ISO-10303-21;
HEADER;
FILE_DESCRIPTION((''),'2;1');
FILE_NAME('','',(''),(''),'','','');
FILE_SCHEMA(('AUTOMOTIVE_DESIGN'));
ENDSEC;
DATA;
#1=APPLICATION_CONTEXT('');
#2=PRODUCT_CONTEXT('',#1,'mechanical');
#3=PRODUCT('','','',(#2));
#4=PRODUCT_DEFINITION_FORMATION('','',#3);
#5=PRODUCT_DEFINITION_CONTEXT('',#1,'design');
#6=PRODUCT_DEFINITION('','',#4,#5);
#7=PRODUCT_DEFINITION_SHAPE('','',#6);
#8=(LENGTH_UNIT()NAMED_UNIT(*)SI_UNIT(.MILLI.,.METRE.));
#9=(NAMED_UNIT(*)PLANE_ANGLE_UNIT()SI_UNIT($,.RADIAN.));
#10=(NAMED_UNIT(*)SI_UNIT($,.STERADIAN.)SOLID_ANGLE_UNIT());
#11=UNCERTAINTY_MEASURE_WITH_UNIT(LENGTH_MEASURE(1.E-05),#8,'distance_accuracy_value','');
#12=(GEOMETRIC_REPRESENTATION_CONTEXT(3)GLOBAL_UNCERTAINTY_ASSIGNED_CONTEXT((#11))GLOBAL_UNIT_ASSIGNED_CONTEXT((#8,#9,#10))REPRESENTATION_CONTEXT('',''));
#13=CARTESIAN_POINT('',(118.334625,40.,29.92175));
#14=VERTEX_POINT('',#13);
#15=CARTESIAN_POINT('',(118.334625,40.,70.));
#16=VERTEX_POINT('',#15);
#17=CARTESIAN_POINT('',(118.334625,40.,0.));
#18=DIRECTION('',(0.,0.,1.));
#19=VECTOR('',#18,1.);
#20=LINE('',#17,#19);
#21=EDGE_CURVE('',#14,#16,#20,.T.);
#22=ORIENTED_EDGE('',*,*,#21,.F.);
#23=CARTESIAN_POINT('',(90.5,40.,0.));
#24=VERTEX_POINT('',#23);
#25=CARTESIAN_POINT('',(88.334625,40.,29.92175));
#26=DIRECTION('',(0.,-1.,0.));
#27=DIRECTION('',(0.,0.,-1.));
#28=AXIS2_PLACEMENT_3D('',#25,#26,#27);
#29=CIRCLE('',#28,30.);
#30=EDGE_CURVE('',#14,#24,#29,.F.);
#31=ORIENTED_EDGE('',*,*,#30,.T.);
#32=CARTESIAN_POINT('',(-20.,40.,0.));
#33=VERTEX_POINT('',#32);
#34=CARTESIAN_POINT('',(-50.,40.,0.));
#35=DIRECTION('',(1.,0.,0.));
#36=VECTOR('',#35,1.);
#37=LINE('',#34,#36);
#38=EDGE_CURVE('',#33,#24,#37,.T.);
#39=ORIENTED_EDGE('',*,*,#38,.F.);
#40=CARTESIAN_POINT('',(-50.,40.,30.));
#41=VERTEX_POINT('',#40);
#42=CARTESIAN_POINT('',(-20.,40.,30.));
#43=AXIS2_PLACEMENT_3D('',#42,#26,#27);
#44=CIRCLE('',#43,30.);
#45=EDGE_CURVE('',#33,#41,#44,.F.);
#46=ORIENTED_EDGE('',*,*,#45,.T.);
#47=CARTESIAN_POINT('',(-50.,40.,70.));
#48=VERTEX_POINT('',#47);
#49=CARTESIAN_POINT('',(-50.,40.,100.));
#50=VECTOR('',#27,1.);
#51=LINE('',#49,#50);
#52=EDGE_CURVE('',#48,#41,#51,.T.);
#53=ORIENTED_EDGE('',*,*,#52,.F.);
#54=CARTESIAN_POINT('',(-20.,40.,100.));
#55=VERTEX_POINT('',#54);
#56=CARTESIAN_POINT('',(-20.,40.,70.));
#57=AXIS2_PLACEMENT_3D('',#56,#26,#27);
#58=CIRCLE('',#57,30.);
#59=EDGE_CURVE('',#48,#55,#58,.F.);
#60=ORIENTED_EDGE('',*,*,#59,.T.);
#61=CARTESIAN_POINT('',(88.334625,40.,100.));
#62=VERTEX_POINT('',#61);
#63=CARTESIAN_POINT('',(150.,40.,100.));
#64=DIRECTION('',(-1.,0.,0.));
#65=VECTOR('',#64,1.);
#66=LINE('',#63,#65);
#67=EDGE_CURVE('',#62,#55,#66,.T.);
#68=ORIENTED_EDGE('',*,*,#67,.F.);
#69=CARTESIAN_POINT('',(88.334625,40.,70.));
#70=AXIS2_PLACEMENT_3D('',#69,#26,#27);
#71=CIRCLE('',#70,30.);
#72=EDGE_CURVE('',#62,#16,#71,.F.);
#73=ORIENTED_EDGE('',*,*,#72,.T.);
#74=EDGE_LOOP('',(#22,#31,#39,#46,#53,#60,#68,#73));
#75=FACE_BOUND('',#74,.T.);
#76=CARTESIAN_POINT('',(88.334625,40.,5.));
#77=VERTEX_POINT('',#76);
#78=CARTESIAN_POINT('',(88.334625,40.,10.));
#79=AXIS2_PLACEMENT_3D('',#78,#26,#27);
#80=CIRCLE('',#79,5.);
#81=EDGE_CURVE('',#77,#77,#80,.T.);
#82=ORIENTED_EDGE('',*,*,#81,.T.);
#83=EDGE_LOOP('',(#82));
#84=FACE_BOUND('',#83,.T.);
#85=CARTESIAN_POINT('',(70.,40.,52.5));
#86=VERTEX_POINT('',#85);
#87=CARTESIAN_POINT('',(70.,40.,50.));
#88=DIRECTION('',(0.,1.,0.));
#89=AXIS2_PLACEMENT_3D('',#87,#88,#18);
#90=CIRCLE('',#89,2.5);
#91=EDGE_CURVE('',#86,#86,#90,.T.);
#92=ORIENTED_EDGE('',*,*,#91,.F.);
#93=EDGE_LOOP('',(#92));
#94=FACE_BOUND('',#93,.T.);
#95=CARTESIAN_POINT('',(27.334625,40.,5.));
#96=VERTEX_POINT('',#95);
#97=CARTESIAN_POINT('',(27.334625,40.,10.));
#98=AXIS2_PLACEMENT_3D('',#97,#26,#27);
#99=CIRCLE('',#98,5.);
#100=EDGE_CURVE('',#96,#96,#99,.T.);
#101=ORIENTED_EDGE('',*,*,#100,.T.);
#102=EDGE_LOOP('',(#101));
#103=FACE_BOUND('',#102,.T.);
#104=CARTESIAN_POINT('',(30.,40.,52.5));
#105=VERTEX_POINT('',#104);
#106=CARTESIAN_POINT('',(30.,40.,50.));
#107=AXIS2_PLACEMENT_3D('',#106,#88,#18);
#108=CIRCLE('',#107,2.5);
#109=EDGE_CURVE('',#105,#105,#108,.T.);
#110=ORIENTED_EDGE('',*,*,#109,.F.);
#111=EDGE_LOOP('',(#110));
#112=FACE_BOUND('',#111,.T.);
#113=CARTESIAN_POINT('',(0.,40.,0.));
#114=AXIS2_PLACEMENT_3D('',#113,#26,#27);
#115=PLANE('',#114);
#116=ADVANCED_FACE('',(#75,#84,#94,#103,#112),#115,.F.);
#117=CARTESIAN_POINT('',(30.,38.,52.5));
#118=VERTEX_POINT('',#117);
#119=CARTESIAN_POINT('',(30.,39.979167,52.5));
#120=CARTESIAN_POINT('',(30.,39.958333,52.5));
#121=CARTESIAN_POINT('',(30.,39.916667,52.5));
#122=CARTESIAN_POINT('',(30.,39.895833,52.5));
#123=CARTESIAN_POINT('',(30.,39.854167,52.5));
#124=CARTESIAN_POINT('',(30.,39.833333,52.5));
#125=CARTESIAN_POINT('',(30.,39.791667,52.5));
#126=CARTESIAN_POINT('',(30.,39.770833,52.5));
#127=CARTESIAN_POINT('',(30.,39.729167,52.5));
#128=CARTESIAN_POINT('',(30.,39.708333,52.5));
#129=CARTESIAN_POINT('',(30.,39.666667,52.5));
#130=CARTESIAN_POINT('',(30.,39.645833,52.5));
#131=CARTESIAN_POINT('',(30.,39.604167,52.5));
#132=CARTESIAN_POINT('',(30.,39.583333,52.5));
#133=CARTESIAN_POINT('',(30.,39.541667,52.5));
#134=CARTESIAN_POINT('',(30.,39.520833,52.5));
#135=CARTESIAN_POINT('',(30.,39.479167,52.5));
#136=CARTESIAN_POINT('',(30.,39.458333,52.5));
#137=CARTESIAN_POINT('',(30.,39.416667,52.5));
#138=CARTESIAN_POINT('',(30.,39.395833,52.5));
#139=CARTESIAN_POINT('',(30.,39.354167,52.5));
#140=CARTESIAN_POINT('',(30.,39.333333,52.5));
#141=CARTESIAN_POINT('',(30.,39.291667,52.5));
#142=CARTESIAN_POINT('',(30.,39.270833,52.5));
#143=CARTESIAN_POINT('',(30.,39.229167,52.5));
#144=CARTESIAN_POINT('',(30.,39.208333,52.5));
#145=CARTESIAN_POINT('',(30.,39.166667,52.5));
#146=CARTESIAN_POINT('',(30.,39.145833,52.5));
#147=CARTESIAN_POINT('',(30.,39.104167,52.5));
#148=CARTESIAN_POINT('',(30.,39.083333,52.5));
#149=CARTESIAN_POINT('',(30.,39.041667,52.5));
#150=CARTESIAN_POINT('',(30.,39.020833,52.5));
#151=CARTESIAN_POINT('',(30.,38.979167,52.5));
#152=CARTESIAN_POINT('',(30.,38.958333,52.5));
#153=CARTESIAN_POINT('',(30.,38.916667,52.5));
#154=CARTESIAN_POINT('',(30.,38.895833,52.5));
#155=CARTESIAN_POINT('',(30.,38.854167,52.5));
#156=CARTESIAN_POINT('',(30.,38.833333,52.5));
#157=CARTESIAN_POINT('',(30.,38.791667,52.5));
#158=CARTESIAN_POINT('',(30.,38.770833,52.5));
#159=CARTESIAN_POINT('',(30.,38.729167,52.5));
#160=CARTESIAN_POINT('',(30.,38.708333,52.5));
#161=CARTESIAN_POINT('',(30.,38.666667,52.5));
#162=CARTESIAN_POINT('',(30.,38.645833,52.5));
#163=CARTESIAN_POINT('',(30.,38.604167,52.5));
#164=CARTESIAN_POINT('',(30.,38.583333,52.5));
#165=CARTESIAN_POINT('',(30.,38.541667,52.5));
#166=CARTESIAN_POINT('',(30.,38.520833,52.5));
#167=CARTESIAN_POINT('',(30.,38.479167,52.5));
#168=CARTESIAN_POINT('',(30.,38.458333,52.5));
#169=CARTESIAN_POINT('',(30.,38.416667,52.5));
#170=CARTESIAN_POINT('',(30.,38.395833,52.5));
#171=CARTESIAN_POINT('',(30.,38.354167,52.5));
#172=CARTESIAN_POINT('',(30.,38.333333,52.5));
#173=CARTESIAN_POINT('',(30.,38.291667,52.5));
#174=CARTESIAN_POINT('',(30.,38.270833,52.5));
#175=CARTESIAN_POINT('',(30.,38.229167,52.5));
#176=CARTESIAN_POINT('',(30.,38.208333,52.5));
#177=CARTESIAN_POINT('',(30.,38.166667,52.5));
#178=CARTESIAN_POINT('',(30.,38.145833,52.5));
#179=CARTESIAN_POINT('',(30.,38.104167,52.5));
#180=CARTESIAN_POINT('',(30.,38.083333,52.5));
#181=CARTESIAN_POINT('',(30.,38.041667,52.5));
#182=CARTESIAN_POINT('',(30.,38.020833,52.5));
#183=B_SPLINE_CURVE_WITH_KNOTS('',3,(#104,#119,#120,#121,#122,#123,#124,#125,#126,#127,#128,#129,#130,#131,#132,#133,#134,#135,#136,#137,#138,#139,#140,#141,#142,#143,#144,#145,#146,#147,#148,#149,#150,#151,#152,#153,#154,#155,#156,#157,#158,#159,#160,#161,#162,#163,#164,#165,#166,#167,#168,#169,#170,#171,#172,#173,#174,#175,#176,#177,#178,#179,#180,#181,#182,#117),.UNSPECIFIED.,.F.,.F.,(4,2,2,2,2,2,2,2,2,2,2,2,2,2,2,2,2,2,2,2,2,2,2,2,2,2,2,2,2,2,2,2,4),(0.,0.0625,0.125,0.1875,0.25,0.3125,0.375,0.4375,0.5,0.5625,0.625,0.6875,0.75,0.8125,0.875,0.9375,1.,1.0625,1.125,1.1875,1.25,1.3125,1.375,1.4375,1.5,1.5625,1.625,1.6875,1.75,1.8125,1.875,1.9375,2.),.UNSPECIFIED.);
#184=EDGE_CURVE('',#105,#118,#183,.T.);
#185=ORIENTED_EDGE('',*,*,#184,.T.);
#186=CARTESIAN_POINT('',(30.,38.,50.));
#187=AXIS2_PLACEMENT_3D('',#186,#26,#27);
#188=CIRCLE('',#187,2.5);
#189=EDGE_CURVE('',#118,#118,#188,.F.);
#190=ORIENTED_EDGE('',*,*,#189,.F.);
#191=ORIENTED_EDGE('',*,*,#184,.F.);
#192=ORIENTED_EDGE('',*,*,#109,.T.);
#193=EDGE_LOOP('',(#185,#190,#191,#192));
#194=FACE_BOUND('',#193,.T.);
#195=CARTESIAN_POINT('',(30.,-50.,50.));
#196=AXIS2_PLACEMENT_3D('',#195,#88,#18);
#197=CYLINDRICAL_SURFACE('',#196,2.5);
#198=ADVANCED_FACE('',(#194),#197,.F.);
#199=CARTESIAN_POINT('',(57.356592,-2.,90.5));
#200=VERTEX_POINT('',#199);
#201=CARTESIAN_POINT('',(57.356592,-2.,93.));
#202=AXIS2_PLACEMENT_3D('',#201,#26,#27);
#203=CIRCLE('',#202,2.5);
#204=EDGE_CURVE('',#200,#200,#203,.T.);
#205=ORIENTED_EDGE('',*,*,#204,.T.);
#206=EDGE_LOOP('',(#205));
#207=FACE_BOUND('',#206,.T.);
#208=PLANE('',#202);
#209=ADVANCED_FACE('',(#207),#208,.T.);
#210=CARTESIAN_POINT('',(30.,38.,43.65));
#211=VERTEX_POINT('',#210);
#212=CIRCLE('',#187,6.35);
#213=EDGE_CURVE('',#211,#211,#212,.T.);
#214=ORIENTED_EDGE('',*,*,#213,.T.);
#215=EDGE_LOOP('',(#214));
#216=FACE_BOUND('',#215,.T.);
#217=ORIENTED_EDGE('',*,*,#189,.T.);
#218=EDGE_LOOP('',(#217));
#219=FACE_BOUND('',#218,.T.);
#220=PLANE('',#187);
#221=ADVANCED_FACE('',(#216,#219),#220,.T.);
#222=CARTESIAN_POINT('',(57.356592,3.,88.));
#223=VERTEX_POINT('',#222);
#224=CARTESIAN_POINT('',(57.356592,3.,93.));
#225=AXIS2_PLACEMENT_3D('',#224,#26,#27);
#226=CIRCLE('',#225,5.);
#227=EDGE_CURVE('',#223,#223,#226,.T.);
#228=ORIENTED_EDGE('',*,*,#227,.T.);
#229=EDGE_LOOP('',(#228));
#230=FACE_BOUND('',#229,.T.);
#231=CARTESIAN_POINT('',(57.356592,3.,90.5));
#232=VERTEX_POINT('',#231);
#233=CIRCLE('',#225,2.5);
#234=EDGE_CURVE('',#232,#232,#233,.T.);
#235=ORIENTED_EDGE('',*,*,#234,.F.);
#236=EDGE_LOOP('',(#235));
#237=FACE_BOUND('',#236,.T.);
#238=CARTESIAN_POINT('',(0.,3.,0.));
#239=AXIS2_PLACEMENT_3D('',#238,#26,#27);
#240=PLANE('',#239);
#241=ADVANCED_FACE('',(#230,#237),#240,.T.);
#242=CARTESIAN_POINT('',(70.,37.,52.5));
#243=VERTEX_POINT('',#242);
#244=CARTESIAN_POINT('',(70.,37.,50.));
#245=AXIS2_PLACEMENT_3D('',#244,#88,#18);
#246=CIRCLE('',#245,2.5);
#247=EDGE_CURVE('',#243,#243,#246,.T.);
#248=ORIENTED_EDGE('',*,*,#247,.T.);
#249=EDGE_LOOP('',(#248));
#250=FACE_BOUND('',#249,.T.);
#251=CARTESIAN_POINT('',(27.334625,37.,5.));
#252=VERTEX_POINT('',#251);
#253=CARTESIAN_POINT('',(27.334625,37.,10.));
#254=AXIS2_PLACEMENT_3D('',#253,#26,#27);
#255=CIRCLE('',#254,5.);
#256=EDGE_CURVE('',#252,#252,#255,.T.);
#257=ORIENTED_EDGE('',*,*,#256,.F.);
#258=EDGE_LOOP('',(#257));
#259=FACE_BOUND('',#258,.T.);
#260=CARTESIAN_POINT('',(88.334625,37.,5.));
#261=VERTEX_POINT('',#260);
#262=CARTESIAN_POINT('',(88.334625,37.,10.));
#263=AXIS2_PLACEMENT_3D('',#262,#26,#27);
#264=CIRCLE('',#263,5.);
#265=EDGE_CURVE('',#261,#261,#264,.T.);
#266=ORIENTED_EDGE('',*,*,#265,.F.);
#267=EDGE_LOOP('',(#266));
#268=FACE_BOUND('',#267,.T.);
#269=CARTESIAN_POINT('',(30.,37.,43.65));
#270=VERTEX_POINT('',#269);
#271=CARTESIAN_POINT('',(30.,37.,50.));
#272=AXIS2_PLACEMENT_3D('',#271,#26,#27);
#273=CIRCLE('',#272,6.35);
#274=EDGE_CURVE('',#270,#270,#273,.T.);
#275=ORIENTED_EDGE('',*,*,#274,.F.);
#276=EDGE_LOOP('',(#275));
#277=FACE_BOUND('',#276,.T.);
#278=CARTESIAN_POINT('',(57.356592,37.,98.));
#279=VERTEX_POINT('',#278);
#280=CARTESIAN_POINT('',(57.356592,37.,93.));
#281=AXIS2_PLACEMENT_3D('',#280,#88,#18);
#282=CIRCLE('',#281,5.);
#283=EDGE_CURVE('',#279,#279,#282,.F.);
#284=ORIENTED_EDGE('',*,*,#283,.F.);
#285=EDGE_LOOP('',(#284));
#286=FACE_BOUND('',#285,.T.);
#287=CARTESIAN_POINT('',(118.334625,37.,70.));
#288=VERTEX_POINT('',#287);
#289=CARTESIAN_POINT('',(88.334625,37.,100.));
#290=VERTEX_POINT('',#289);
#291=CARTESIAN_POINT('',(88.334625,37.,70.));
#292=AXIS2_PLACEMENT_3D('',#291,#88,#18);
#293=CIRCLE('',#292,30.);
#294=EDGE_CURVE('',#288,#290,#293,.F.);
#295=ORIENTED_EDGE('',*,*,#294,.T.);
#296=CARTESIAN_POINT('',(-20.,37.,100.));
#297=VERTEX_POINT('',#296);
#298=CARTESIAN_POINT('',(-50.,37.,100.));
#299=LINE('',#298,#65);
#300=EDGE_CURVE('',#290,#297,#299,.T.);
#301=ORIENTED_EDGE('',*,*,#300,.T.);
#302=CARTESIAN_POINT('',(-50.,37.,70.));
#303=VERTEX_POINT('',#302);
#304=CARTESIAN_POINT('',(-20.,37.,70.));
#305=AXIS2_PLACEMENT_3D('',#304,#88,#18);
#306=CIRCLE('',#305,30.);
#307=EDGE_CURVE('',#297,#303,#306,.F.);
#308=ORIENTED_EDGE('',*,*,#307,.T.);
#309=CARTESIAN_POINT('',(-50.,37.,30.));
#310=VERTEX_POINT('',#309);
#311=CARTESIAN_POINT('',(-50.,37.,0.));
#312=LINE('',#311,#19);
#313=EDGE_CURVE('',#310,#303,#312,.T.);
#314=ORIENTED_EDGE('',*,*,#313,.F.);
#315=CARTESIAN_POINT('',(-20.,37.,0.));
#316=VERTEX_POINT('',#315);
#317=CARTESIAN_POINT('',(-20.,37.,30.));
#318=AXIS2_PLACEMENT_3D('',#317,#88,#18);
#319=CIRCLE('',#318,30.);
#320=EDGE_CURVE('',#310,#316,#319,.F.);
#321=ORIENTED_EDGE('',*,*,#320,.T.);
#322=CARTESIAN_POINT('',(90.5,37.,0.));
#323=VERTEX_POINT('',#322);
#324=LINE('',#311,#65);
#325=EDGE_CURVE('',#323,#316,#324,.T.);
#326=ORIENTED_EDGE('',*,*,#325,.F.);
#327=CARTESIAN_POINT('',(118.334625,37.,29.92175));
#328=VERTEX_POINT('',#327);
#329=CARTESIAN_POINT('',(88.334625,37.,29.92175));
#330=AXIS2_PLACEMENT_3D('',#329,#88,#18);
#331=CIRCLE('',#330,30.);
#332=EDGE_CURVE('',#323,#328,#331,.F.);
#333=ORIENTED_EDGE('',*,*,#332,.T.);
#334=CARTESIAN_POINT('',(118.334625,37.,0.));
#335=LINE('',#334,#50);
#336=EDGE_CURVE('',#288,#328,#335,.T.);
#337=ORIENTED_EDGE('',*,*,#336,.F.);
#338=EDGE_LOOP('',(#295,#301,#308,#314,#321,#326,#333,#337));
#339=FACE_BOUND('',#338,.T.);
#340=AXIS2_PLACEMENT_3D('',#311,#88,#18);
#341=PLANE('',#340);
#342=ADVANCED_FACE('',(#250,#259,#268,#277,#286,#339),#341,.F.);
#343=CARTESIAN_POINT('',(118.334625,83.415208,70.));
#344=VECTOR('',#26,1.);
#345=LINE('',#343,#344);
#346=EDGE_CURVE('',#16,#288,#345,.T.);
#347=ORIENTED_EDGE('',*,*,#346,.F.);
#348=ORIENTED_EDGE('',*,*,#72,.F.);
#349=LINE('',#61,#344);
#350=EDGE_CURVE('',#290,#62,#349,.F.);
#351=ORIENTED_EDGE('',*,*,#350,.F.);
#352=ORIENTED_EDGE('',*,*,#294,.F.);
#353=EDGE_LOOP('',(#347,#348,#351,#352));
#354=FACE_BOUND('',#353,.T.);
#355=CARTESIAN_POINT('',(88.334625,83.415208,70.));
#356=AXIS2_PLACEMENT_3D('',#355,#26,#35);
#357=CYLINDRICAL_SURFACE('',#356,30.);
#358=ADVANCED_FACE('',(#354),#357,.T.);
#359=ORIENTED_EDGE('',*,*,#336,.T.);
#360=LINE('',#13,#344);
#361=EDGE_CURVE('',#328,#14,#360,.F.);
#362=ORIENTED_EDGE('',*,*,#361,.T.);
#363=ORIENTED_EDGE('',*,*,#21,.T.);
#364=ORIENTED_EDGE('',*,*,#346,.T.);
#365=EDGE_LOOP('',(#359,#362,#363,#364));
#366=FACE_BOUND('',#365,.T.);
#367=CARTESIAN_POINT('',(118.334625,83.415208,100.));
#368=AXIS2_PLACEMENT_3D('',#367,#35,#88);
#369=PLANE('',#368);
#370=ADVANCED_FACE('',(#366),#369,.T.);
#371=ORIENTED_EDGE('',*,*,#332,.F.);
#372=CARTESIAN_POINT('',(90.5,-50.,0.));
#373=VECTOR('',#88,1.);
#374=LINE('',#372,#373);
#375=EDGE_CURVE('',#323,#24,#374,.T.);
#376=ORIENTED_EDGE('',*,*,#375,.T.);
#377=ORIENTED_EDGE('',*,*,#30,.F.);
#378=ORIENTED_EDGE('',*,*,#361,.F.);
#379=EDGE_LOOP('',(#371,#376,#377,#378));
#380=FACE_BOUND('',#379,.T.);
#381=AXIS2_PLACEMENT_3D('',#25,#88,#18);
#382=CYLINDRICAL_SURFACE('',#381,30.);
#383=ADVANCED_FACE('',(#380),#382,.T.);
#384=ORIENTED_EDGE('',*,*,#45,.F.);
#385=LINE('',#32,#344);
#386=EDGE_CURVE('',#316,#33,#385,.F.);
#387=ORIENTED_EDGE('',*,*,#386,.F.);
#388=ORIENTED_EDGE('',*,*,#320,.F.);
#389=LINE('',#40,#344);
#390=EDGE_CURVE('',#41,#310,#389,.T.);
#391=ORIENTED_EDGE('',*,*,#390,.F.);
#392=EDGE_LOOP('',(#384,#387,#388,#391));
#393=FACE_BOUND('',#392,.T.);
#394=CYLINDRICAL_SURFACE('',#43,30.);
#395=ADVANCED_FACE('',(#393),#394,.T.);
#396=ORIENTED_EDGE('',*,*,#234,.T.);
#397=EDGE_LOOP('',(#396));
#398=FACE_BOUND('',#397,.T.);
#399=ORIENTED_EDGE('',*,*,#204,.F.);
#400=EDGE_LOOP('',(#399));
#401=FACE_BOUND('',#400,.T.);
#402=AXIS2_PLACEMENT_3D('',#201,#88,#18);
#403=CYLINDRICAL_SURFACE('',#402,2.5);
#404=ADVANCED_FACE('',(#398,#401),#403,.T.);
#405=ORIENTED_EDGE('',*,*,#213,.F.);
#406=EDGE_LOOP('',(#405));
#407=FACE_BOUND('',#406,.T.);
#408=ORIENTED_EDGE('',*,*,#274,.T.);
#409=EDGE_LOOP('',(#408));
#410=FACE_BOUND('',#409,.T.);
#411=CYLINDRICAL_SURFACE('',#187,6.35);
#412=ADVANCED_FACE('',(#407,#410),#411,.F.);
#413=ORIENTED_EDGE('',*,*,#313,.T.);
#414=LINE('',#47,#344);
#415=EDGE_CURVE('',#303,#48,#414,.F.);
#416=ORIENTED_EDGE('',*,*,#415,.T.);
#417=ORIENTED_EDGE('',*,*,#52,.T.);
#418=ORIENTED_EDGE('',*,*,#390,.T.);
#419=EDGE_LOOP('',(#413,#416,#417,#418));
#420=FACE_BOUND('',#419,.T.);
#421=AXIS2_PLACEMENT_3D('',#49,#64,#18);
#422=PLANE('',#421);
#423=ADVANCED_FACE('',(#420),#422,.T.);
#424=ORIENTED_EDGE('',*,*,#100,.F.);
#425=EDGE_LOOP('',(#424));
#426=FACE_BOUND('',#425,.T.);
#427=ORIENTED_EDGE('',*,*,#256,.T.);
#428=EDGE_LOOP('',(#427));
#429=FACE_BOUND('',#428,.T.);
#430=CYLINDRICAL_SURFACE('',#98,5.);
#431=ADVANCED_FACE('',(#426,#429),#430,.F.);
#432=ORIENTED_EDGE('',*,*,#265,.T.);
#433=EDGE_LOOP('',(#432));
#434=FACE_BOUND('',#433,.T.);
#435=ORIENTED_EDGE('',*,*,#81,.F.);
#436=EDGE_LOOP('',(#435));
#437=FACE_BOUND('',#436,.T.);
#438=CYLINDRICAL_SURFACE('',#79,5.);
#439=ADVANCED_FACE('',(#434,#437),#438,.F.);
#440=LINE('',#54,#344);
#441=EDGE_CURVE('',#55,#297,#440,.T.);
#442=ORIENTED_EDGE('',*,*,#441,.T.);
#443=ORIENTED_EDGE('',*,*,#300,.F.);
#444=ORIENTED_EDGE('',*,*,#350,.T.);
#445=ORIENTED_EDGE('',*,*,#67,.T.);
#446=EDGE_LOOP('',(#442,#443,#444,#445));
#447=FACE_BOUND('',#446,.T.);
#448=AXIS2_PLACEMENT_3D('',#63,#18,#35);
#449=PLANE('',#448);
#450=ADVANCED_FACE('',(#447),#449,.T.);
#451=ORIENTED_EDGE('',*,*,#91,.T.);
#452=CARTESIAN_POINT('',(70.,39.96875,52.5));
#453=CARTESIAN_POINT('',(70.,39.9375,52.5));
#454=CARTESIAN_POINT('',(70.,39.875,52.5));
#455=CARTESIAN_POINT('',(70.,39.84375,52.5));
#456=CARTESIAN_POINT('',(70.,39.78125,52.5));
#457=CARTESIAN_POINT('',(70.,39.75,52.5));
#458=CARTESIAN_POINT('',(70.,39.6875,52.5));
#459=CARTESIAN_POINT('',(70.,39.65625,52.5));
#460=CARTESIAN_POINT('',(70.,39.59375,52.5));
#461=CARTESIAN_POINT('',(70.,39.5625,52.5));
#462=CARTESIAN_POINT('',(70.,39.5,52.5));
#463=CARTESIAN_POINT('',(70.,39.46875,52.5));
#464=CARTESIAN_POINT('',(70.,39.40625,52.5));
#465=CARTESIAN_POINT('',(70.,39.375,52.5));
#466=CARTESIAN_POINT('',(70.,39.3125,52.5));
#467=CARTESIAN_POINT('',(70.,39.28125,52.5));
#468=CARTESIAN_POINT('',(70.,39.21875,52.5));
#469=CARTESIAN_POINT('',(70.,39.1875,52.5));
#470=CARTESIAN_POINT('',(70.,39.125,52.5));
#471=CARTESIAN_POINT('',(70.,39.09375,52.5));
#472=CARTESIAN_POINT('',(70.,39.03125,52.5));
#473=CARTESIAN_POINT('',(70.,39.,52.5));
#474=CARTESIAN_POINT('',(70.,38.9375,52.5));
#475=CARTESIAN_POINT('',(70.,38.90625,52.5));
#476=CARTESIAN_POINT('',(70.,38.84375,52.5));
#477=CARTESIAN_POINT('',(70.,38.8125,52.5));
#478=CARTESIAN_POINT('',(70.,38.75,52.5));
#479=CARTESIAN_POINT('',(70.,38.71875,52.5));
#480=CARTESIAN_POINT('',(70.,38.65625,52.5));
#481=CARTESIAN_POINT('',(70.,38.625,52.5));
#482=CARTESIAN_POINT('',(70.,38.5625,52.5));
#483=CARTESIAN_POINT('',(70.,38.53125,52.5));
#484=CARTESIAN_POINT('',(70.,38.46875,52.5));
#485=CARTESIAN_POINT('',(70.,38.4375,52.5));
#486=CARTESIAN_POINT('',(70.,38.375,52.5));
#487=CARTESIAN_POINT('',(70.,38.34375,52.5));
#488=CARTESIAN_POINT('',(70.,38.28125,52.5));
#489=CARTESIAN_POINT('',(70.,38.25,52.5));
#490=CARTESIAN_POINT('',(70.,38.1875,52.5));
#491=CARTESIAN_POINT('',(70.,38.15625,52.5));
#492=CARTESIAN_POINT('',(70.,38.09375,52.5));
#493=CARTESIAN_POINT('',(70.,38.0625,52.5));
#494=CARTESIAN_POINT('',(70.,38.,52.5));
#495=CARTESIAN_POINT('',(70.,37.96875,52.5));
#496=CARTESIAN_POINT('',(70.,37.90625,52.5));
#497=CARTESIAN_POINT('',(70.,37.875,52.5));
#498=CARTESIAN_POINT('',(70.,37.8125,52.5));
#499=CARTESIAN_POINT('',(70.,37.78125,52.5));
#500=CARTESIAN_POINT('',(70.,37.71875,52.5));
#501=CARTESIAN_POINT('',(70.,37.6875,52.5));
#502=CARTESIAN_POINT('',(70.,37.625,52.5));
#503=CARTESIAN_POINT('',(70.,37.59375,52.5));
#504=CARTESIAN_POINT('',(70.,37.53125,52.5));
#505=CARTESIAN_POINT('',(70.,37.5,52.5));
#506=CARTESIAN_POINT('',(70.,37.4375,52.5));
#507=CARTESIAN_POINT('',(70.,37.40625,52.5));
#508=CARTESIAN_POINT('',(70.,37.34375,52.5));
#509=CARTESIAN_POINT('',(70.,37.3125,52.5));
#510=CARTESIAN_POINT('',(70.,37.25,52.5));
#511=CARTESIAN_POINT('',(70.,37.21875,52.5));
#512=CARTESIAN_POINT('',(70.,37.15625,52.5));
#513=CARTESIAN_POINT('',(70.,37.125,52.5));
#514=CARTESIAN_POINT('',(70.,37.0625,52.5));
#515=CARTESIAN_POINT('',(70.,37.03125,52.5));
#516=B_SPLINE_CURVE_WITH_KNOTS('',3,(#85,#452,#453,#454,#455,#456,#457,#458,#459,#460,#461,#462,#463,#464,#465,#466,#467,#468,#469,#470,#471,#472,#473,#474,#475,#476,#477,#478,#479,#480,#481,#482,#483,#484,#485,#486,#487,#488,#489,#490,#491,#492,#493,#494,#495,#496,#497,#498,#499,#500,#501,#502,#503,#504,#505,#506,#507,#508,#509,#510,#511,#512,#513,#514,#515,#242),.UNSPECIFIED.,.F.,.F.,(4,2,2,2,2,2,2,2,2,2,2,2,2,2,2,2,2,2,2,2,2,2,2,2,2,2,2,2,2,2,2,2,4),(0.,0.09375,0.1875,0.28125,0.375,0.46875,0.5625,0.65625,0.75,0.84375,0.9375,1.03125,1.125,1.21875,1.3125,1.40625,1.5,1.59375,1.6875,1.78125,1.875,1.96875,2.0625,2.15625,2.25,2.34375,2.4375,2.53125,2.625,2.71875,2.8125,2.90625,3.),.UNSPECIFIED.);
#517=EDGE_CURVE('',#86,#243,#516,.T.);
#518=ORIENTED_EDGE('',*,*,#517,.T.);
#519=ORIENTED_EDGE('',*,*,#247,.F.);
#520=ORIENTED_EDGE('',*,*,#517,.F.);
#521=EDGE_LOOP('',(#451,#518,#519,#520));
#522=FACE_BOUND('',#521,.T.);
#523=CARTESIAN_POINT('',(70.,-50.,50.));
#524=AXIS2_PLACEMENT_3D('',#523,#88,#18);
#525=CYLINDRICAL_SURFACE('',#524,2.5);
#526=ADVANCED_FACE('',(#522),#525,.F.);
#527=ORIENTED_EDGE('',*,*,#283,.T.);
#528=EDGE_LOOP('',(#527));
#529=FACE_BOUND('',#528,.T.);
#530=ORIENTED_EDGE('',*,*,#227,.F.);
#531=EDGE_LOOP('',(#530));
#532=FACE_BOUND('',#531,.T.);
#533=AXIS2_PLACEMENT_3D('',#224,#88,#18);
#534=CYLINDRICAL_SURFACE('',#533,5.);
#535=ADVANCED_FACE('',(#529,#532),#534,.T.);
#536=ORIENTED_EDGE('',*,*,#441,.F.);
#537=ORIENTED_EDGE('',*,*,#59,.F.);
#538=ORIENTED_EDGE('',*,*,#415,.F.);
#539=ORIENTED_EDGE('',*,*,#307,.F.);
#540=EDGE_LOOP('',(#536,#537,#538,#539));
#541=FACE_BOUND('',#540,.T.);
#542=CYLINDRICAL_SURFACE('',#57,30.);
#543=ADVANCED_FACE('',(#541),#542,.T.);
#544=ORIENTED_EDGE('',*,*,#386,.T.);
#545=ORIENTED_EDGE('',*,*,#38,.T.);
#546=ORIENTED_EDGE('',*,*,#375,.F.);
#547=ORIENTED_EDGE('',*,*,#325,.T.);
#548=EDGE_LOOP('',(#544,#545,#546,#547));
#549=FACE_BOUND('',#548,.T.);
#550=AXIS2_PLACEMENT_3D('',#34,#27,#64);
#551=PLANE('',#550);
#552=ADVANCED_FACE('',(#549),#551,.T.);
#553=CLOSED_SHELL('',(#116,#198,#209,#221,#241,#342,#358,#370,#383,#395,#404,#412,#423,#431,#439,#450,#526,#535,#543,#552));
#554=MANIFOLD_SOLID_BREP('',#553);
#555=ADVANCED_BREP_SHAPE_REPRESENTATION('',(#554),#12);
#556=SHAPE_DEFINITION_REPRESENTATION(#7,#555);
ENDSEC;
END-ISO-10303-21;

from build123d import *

# Parameters (mm, degrees)
EXTRUDE_1_DEPTH           = 50
EXTRUDE_1_DEPTH_BACK      = 50
SKETCH_2_W                = 200
SKETCH_2_H                = 100
EXTRUDE_2_DEPTH           = 40
SKETCH_3_W                = 200
SKETCH_3_H                = 34
CUT_EXTRUDE_1_DEPTH       = 100
CUT_EXTRUDE_2_DEPTH       = 279.66871012
SKETCH_8_R                = 2.5
CUT_EXTRUDE_4_DEPTH       = 276.238532913
SKETCH_10_R               = 5
CUT_EXTRUDE_5_DEPTH       = 260.608358879
EXTRUDE_5_DEPTH           = 10
SKETCH_13_W               = 74.115787845
SKETCH_13_H               = 3
EXTRUDE_7_DEPTH           = 81
SKETCH_14_W               = 207.5
SKETCH_14_H               = 100
EXTRUDE_8_DEPTH           = 7
EXTRUDE_9_DEPTH           = 10
SKETCH_17_R               = 6.35
CUT_EXTRUDE_6_DEPTH       = 1
CUT_EXTRUDE_START         = -1
SKETCH_18_R               = 6.35
CUT_EXTRUDE_7_DEPTH       = 1
SKETCH_20_R               = 5
CUT_EXTRUDE_8_DEPTH       = 3
CUT_EXTRUDE_9_DEPTH       = 273.255129638
CUT_EXTRUDE_9_DEPTH_BACK  = 273.255129638
SKETCH_21_W               = 31.665374736
SKETCH_21_H               = 100
SKETCH_22_R               = 5
EXTRUDE_10_DEPTH          = 37
FILLET_1_R                = 30
FILLET_2_R                = 30
CUT_EXTRUDE_10_DEPTH      = 248.444254611
CUT_EXTRUDE_10_DEPTH_BACK = 248.444254611
CUT_EXTRUDE_11_DEPTH      = 211.689689342
CUT_EXTRUDE_11_DEPTH_BACK = 211.689689342
CUT_EXTRUDE_12_DEPTH      = 174.368632309
CUT_EXTRUDE_12_DEPTH_BACK = 174.368632309
SKETCH_26_R               = 5
CUT_EXTRUDE_13_DEPTH      = 153.295269567
CUT_EXTRUDE_13_DEPTH_BACK = 153.295269567
CUT_EXTRUDE_14_DEPTH      = 160.286168691
CUT_EXTRUDE_14_DEPTH_BACK = 160.286168691
SKETCH_30_R               = 7.5
CUT_EXTRUDE_15_DEPTH      = 160.286168691
CUT_EXTRUDE_15_DEPTH_BACK = 160.286168691
SKETCH_31_R               = 7.5
SKETCH_31_R_2             = 5
SKETCH_32_R               = 7.5
SKETCH_32_R_2             = 5
EXTRUDE_12_DEPTH          = 3
SKETCH_33_R               = 7.5
SKETCH_33_R_2             = 5
EXTRUDE_13_DEPTH          = 3
SKETCH_34_R               = 5
EXTRUDE_14_DEPTH          = 45
CUT_EXTRUDE_17_DEPTH      = 178.031776809
CUT_EXTRUDE_17_DEPTH_BACK = 178.031776809
SKETCH_37_W               = 132.207085757
SKETCH_37_H               = 67.753693261
EXTRUDE_19_DEPTH          = 34
SKETCH_44_R               = 2.5
EXTRUDE_20_DEPTH          = 5
SKETCH_41_R               = 7.5
SKETCH_41_R_2             = 5
EXTRUDE_17_DEPTH          = 3
SKETCH_42_R               = 7.5
SKETCH_42_R_2             = 5
EXTRUDE_18_DEPTH          = 3


with BuildPart() as part:
    # 草图1 → 凸台-拉伸1 (new, two sides: drawn at the far end of the back side and taken through both)
    with BuildSketch(Plane(origin=(0, 0, 0), x_dir=(1, 0, 0), z_dir=(0, 1, 0)).offset(-EXTRUDE_1_DEPTH_BACK)):
        Polygon((9.5, 12.5), (9.5, 0), (90.5, 0), (90.5, 12.5), (90.5, 212.5), (9.5, 212.5), align=None)
    extrude(amount=EXTRUDE_1_DEPTH + EXTRUDE_1_DEPTH_BACK)

    # 草图2 → 凸台-拉伸2 (add)
    with BuildSketch(Plane(origin=(0, 0, 0), x_dir=(-1, 0, 0), z_dir=(0, -1, 0))):
        with Locations((-50, -50)):
            Rectangle(SKETCH_2_W, SKETCH_2_H)
    extrude(amount=-EXTRUDE_2_DEPTH)

    # 草图3 → 切除-拉伸1 (cut)
    with BuildSketch(Plane.XY.offset(100)):
        with Locations((50, 20)):
            Rectangle(SKETCH_3_W, SKETCH_3_H)
    extrude(amount=-CUT_EXTRUDE_1_DEPTH, mode=Mode.SUBTRACT)

    # 草图6 → 切除-拉伸2 (cut, through all)
    with BuildSketch(Plane(origin=(0, 50, 0), x_dir=(1, 0, 0), z_dir=(0, 1, 0))):
        Polygon((12.5, 905.325014188), (12.5, 212.5), (12.5, 5), (87.5, 5), (87.5, 212.5), (87.5, 905.325014188), (87.5, 2290.975042562), (12.5, 2290.975042562), align=None)
    extrude(amount=-CUT_EXTRUDE_2_DEPTH, mode=Mode.SUBTRACT)

    # 草图8 → 切除-拉伸4 (cut, through all)
    with BuildSketch(Plane(origin=(0, 40, 0), x_dir=(1, 0, 0), z_dir=(0, 1, 0))):
        with Locations(Location((70, -50, 0), (0, 0, 270))):
            Circle(SKETCH_8_R)
        with Locations(Location((30, -50, 0), (0, 0, 270))):
            Circle(SKETCH_8_R)
    extrude(amount=-CUT_EXTRUDE_4_DEPTH, mode=Mode.SUBTRACT)

    # 草图10 → 切除-拉伸5 (cut, through all)
    with BuildSketch(Plane(origin=(90.5, 0, 0), x_dir=(0, 0, -1), z_dir=(1, 0, 0))):
        with Locations((80, 0)):
            Circle(SKETCH_10_R)
        with Locations((180, 0)):
            Circle(SKETCH_10_R)
    extrude(amount=-CUT_EXTRUDE_5_DEPTH, mode=Mode.SUBTRACT)

    # 草图11 → 凸台-拉伸5 (add)
    with BuildSketch(Plane.ZY.offset(-9.5)):
        Polygon((-30.905613639, 83.415207604), (-74.094429483, 50), (0, 50), (0, 40), (83.32101017, 40), align=None)
    extrude(amount=-EXTRUDE_5_DEPTH)

    # 草图13 → 凸台-拉伸7 (add)
    with BuildSketch(Plane(origin=(90.5, 0, 0), x_dir=(0, 0, -1), z_dir=(1, 0, 0))):
        with Locations((37.057893922, 51.5)):
            Rectangle(SKETCH_13_W, SKETCH_13_H)
    extrude(amount=-EXTRUDE_7_DEPTH)

    # 草图14 → 凸台-拉伸8 (add)
    with BuildSketch(Plane(origin=(12.5, 0, 0), x_dir=(0, 0, -1), z_dir=(1, 0, 0))):
        with Locations((108.75, 0)):
            Rectangle(SKETCH_14_W, SKETCH_14_H)
    extrude(amount=EXTRUDE_8_DEPTH)

    # 草图15 → 凸台-拉伸9 (add)
    with BuildSketch(Plane(origin=(90.5, 0, 0), x_dir=(0, 0, -1), z_dir=(1, 0, 0))):
        Polygon((30.905613639, 83.415207604), (-82.902171575, 40), (0, 40), (0, 53), (70.216960007, 53), align=None)
    extrude(amount=-EXTRUDE_9_DEPTH)

    # 草图17 → 切除-拉伸6 (cut)
    with BuildSketch(Plane(origin=(0, 37, 0), x_dir=(-1, 0, 0), z_dir=(0, -1, 0))):
        with Locations(Location((-30, -50, 0), (0, 0, 90))):
            Circle(SKETCH_17_R)
    extrude(amount=-CUT_EXTRUDE_6_DEPTH, mode=Mode.SUBTRACT)

    # 草图18 → 切除-拉伸7 (cut)
    with BuildSketch(Plane(origin=(0, 3, 0), x_dir=(1, 0, 0), z_dir=(0, 1, 0)).offset(CUT_EXTRUDE_START)):
        with Locations(Location((30, -50, 0), (0, 0, 90))):
            Circle(SKETCH_18_R)
    extrude(amount=CUT_EXTRUDE_7_DEPTH, mode=Mode.SUBTRACT)

    # 草图20 → 切除-拉伸8 (cut)
    with BuildSketch(Plane.XZ):
        with Locations(Location((-31.25, 50, 0), (0, 0, 270))):
            Circle(SKETCH_20_R)
        with Locations(Location((91.25, 50, 0), (0, 0, 270))):
            Circle(SKETCH_20_R)
    extrude(amount=-CUT_EXTRUDE_8_DEPTH, mode=Mode.SUBTRACT)

    # 草图21 → 切除-拉伸9 (cut, two sides: drawn at the far end of the back side and taken through both)
    with BuildSketch(Plane(origin=(0, 3, 0), x_dir=(1, 0, 0), z_dir=(0, 1, 0)).offset(-CUT_EXTRUDE_9_DEPTH_BACK)):
        with Locations((134.167312632, -50)):
            Rectangle(SKETCH_21_W, SKETCH_21_H)
    extrude(amount=CUT_EXTRUDE_9_DEPTH + CUT_EXTRUDE_9_DEPTH_BACK, mode=Mode.SUBTRACT)

    # 草图22 → 凸台-拉伸10 (add)
    with BuildSketch(Plane.XZ):
        with Locations((-28.834995313, 14.93844285)):
            Circle(SKETCH_22_R)
        with Locations((99.943738589, 14.93844285)):
            Circle(SKETCH_22_R)
        with Locations((47.358621855, 88.902784002)):
            Circle(SKETCH_22_R)
    extrude(amount=-EXTRUDE_10_DEPTH)

    # 圆角1
    # the kernel refuses this fillet: 30 mm, written as the material it takes off along each edge
    with BuildSketch(Plane(origin=(-32.536340759, 83.415207604, -30.905613639), x_dir=(0, -0.6119293356637439, -0.7909124402575352), z_dir=(1, 0, 0))) as fillet_1_piece_1:
        with BuildLine():
            CenterArc((FILLET_1_R * 0.560484543454, -FILLET_1_R), FILLET_1_R, 90, 58.539912966)
            Line((-FILLET_1_R * 0.292519393108, -FILLET_1_R * 0.478095521948), (-FILLET_1_R * 0.309579471839, -FILLET_1_R * 0.467657432387))
            Line((-FILLET_1_R * 0.309579471839, -FILLET_1_R * 0.467657432387), (-FILLET_1_R * 0.0112096908691, FILLET_1_R * 0.02))
            Line((-FILLET_1_R * 0.0112096908691, FILLET_1_R * 0.02), (FILLET_1_R * 0.560484543454, FILLET_1_R * 0.02))
            Line((FILLET_1_R * 0.560484543454, FILLET_1_R * 0.02), (FILLET_1_R * 0.560484543454, 0))
        make_face()
    extrude(amount=94.072681518, mode=Mode.SUBTRACT)
    with BuildSketch(Plane(origin=(132.596564701, 83.415207604, -30.905613639), x_dir=(0, -0.6119293356637436, -0.7909124402575354), z_dir=(-1, 0, 0))) as fillet_1_piece_2:
        with BuildLine():
            CenterArc((FILLET_1_R * 0.561287529341, FILLET_1_R), FILLET_1_R, 211.390091687, 58.609908313)
            Line((-FILLET_1_R * 0.292353354769, FILLET_1_R * 0.479137982787), (-FILLET_1_R * 0.309426172451, FILLET_1_R * 0.468720742443))
            Line((-FILLET_1_R * 0.309426172451, FILLET_1_R * 0.468720742443), (-FILLET_1_R * 0.0112257505868, -FILLET_1_R * 0.02))
            Line((-FILLET_1_R * 0.0112257505868, -FILLET_1_R * 0.02), (FILLET_1_R * 0.561287529341, -FILLET_1_R * 0.02))
            Line((FILLET_1_R * 0.561287529341, -FILLET_1_R * 0.02), (FILLET_1_R * 0.561287529341, 0))
        make_face()
    extrude(amount=94.193129401, mode=Mode.SUBTRACT)
    with BuildSketch(Plane(origin=(118.334625264, -38, 100), x_dir=(-1, 0, 0), z_dir=(0, 1, 0)), Plane(origin=(118.334625264, -75, 100), x_dir=(-1, 0, 0), z_dir=(0, 1, 0)), Plane(origin=(-50, -38, 0), x_dir=(1, 0, 0), z_dir=(0, 1, 0)), Plane(origin=(-50, -38, 100), x_dir=(0, 0, -1), z_dir=(0, 1, 0)), Plane(origin=(-50, -75, 100), x_dir=(0, 0, -1), z_dir=(0, 1, 0)), Plane(origin=(-50, -75, 0), x_dir=(1, 0, 0), z_dir=(0, 1, 0))) as fillet_1_piece_3:
        with BuildLine():
            CenterArc((FILLET_1_R, -FILLET_1_R), FILLET_1_R, 90, 90)
            Line((0, -FILLET_1_R), (-FILLET_1_R * 0.02, -FILLET_1_R))
            Line((-FILLET_1_R * 0.02, -FILLET_1_R), (-FILLET_1_R * 0.02, FILLET_1_R * 0.02))
            Line((-FILLET_1_R * 0.02, FILLET_1_R * 0.02), (FILLET_1_R, FILLET_1_R * 0.02))
            Line((FILLET_1_R, FILLET_1_R * 0.02), (FILLET_1_R, 0))
        make_face()
    extrude(amount=153, mode=Mode.SUBTRACT)
    with BuildSketch(Plane(origin=(118.334625264, 114.804376219, 0), x_dir=(0, 0, 1), z_dir=(0, -1, 0))) as fillet_1_piece_4:
        with BuildLine():
            CenterArc((29.921750488, 30), FILLET_1_R, 184.139160489, 85.860839511)
            Line((0, 27.834625264), (-0.59843501, 27.791317769))
            ThreePointArc((-0.59843501, 27.791317769), (-0.6, 13.917312632), (-0.6, 0))
            Line((-0.6, 0), (0, -0.6))
            Line((0, -0.6), (29.921750488, -0.6))
            Line((29.921750488, -0.6), (29.921750488, 0))
        make_face()
    extrude(amount=152.608752439, mode=Mode.SUBTRACT)
    with BuildSketch(Plane(origin=(118.334625264, 77.804376219, 0), x_dir=(-1, 0, 0), z_dir=(0, -1, 0))) as fillet_1_piece_5:
        with BuildLine():
            CenterArc((30, -29.921750488), FILLET_1_R, 94.139160489, 85.860839511)
            Line((0, -29.921750488), (-0.6, -29.921750488))
            Line((-0.6, -29.921750488), (-0.6, 0))
            Line((-0.6, 0), (0, 0.6))
            ThreePointArc((0, 0.6), (13.917312632, 0.6), (27.791317769, 0.59843501))
            Line((27.791317769, 0.59843501), (27.834625264, 0))
        make_face()
    extrude(amount=152.608752439, mode=Mode.SUBTRACT)

    # 圆角2
    fillet_2_edges = [part.edges().sort_by_distance(p)[0] for p in [
        (89, 50, -212.5),
        (89, -50, -212.5),
        (14.5, 50, -212.5),
        (14.5, -50, -212.5),
    ]]
    fillet(fillet_2_edges, radius=FILLET_2_R)

    # 草图23 → 切除-拉伸10 (cut, two sides: drawn at the far end of the back side and taken through both)
    with BuildSketch(Plane(origin=(19.5, 0, 0), x_dir=(0, 0, -1), z_dir=(1, 0, 0)).offset(-CUT_EXTRUDE_10_DEPTH_BACK)):
        Polygon((-82.902171575, 40), (15.172878857, 77.413509693), (30.26062931, 83.169160038), (82.911746167, 53.484816406), (216.982404769, 51.400816531), (216.982404769, -53.030732743), (0, -55.346288159), (0, 40), align=None)
    extrude(amount=CUT_EXTRUDE_10_DEPTH + CUT_EXTRUDE_10_DEPTH_BACK, mode=Mode.SUBTRACT)

    # 草图25 → 切除-拉伸11 (cut, two sides: drawn at the far end of the back side and taken through both)
    with BuildSketch(Plane(origin=(118.334625264, 0, 0), x_dir=(0, 0, -1), z_dir=(1, 0, 0)).offset(-CUT_EXTRUDE_11_DEPTH_BACK)):
        Polygon((-96.999238457, 37), (-5.714105567, 37), (-5.714105567, 3), (-98.622428797, 3), align=None)
    extrude(amount=CUT_EXTRUDE_11_DEPTH + CUT_EXTRUDE_11_DEPTH_BACK, mode=Mode.SUBTRACT)


with BuildPart() as cut_extrude_11_piece_1:
    # of the separate pieces the step leaves, piece 1, a body of its own (cut_extrude_11_pieces)
    add(part.part.solids().sort_by_distance((118.334625264, 37, 70))[0])


with BuildPart() as cut_extrude_11_piece_2:
    # of the separate pieces the step leaves, piece 2, a body of its own (cut_extrude_11_pieces)
    add(part.part.solids().sort_by_distance((-20, 0, 0))[0])


with BuildPart() as cut_extrude_12_tool:
    # 草图26 → 切除-拉伸12 (new, two sides: drawn at the far end of the back side and taken through both)
    with BuildSketch(Plane.XZ.offset(-CUT_EXTRUDE_12_DEPTH_BACK)):
        with Locations(Location((88.334625264, 10, 0), (0, 0, 270))):
            Circle(SKETCH_26_R)
        with Locations(Location((27.334625264, 10, 0), (0, 0, 270))):
            Circle(SKETCH_26_R)
    extrude(amount=CUT_EXTRUDE_12_DEPTH + CUT_EXTRUDE_12_DEPTH_BACK)


with BuildPart() as cut_extrude_11_piece_1_1:
    add(cut_extrude_11_piece_1.part)

    # 切除-拉伸12: cut by cut_extrude_12_tool
    add(cut_extrude_12_tool.part, mode=Mode.SUBTRACT)

    # 草图27 → 切除-拉伸13 (cut, two sides: drawn at the far end of the back side and taken through both)
    with BuildSketch(Plane.ZY.offset(-34.5).offset(-CUT_EXTRUDE_13_DEPTH_BACK)):
        Polygon((-18.94184398, 81.696068066), (-17.663883038, 66.307288383), (80.739109538, 40), (87.341907742, 40), align=None)
    extrude(amount=CUT_EXTRUDE_13_DEPTH + CUT_EXTRUDE_13_DEPTH_BACK, mode=Mode.SUBTRACT)


with BuildPart() as cut_extrude_11_piece_2_1:
    add(cut_extrude_11_piece_2.part)

    # 切除-拉伸12: cut by cut_extrude_12_tool
    add(cut_extrude_12_tool.part, mode=Mode.SUBTRACT)


with BuildPart() as cut_extrude_14_tool:
    # 草图30 → 切除-拉伸14 (new, two sides: drawn at the far end of the back side and taken through both)
    with BuildSketch(Plane.XZ.offset(-37).offset(-CUT_EXTRUDE_14_DEPTH_BACK)):
        with Locations(Location((88.334625264, 10, 0), (0, 0, 270))):
            Circle(SKETCH_30_R)
    extrude(amount=CUT_EXTRUDE_14_DEPTH + CUT_EXTRUDE_14_DEPTH_BACK)


with BuildPart() as cut_extrude_11_piece_1_2:
    add(cut_extrude_11_piece_1_1.part)

    # 切除-拉伸14: cut by cut_extrude_14_tool
    add(cut_extrude_14_tool.part, mode=Mode.SUBTRACT)


with BuildPart() as cut_extrude_11_piece_2_2:
    add(cut_extrude_11_piece_2_1.part)

    # 切除-拉伸14: cut by cut_extrude_14_tool
    add(cut_extrude_14_tool.part, mode=Mode.SUBTRACT)


with BuildPart() as cut_extrude_15_tool:
    # 草图31 → 切除-拉伸15 (new, two sides: drawn at the far end of the back side and taken through both)
    with BuildSketch(Plane.XZ.offset(-37).offset(-CUT_EXTRUDE_15_DEPTH_BACK)):
        with Locations(Location((27.334625264, 10, 0), (0, 0, 270))):
            Circle(SKETCH_31_R)
        with Locations((27.334625264, 10)):
            Circle(SKETCH_31_R_2, mode=Mode.SUBTRACT)
    extrude(amount=CUT_EXTRUDE_15_DEPTH + CUT_EXTRUDE_15_DEPTH_BACK)


with BuildPart() as cut_extrude_11_piece_1_3:
    add(cut_extrude_11_piece_1_2.part)

    # 切除-拉伸15: cut by cut_extrude_15_tool
    add(cut_extrude_15_tool.part, mode=Mode.SUBTRACT)



with BuildPart() as cut_extrude_11_piece_2_3:
    add(cut_extrude_11_piece_2_2.part)

    # 切除-拉伸15: cut by cut_extrude_15_tool
    add(cut_extrude_15_tool.part, mode=Mode.SUBTRACT)

    # 草图32 → 凸台-拉伸12 (add)
    with BuildSketch(Plane.XZ):
        with Locations(Location((27.334625264, 10, 0), (0, 0, 270))):
            Circle(SKETCH_32_R)
        with Locations(Location((27.334625264, 10, 0), (0, 0, 270))):
            Circle(SKETCH_32_R_2, mode=Mode.SUBTRACT)
    extrude(amount=-EXTRUDE_12_DEPTH)

    # 草图33 → 凸台-拉伸13 (add)
    with BuildSketch(Plane.XZ):
        with Locations(Location((88.334625264, 10, 0), (0, 0, 270))):
            Circle(SKETCH_33_R)
        with Locations(Location((88.334625264, 10, 0), (0, 0, 270))):
            Circle(SKETCH_33_R_2, mode=Mode.SUBTRACT)
    extrude(amount=-EXTRUDE_13_DEPTH)


with BuildPart() as cut_extrude_11_piece_1_4:
    add(cut_extrude_11_piece_1_3.part)

    add(cut_extrude_11_piece_2_3.part)  # 凸台-拉伸14 merges 切除-拉伸11 piece 2
    # 草图34 → 凸台-拉伸14 (add)
    with BuildSketch(Plane.XZ.offset(-37)):
        with Locations(Location((57.356592352, 86.553493229, 0), (0, 0, 90))):
            Circle(SKETCH_34_R)
    extrude(amount=EXTRUDE_14_DEPTH)

    # 草图37 → 切除-拉伸17 (cut, two sides: drawn at the far end of the back side and taken through both)
    with BuildSketch(Plane(origin=(90.5, 0, 0), x_dir=(0, 0, -1), z_dir=(1, 0, 0)).offset(-CUT_EXTRUDE_17_DEPTH_BACK)):
        with Locations((-61.671884505, 3.123153369)):
            Rectangle(SKETCH_37_W, SKETCH_37_H)
    extrude(amount=CUT_EXTRUDE_17_DEPTH + CUT_EXTRUDE_17_DEPTH_BACK, mode=Mode.SUBTRACT)

    # 草图43 → 凸台-拉伸19 (add)
    with BuildSketch(Plane.XZ.offset(-37)):
        with BuildLine():
            ThreePointArc((57.356592352, 98), (52.356592352, 93), (57.356592352, 88))
            Line((57.356592352, 88), (57.356592352, 98))
        make_face()
        with BuildLine():
            Line((57.356592352, 98), (57.356592352, 88))
            ThreePointArc((57.356592352, 88), (60.892126258, 89.464466094), (62.356592352, 93))
            ThreePointArc((62.356592352, 93), (60.892126258, 96.535533906), (57.356592352, 98))
        make_face()
    extrude(amount=EXTRUDE_19_DEPTH)

    # 草图44 → 凸台-拉伸20 (add)
    with BuildSketch(Plane.XZ.offset(-3)):
        with Locations(Location((57.356592352, 93, 0), (0, 0, 270))):
            Circle(SKETCH_44_R)
    extrude(amount=EXTRUDE_20_DEPTH)

    # 草图41 → 凸台-拉伸17 (add)
    with BuildSketch(Plane.XZ.offset(-37)):
        with Locations((27.334625264, 10)):
            Circle(SKETCH_41_R)
        with Locations(Location((27.334625264, 10, 0), (0, 0, 270))):
            Circle(SKETCH_41_R_2, mode=Mode.SUBTRACT)
    extrude(amount=-EXTRUDE_17_DEPTH)

    # 草图42 → 凸台-拉伸18 (add)
    with BuildSketch(Plane.XZ.offset(-37)):
        with Locations((88.334625264, 10)):
            Circle(SKETCH_42_R)
        with Locations(Location((88.334625264, 10, 0), (0, 0, 270))):
            Circle(SKETCH_42_R_2, mode=Mode.SUBTRACT)
    extrude(amount=-EXTRUDE_18_DEPTH)


solid = cut_extrude_11_piece_1_4.part
